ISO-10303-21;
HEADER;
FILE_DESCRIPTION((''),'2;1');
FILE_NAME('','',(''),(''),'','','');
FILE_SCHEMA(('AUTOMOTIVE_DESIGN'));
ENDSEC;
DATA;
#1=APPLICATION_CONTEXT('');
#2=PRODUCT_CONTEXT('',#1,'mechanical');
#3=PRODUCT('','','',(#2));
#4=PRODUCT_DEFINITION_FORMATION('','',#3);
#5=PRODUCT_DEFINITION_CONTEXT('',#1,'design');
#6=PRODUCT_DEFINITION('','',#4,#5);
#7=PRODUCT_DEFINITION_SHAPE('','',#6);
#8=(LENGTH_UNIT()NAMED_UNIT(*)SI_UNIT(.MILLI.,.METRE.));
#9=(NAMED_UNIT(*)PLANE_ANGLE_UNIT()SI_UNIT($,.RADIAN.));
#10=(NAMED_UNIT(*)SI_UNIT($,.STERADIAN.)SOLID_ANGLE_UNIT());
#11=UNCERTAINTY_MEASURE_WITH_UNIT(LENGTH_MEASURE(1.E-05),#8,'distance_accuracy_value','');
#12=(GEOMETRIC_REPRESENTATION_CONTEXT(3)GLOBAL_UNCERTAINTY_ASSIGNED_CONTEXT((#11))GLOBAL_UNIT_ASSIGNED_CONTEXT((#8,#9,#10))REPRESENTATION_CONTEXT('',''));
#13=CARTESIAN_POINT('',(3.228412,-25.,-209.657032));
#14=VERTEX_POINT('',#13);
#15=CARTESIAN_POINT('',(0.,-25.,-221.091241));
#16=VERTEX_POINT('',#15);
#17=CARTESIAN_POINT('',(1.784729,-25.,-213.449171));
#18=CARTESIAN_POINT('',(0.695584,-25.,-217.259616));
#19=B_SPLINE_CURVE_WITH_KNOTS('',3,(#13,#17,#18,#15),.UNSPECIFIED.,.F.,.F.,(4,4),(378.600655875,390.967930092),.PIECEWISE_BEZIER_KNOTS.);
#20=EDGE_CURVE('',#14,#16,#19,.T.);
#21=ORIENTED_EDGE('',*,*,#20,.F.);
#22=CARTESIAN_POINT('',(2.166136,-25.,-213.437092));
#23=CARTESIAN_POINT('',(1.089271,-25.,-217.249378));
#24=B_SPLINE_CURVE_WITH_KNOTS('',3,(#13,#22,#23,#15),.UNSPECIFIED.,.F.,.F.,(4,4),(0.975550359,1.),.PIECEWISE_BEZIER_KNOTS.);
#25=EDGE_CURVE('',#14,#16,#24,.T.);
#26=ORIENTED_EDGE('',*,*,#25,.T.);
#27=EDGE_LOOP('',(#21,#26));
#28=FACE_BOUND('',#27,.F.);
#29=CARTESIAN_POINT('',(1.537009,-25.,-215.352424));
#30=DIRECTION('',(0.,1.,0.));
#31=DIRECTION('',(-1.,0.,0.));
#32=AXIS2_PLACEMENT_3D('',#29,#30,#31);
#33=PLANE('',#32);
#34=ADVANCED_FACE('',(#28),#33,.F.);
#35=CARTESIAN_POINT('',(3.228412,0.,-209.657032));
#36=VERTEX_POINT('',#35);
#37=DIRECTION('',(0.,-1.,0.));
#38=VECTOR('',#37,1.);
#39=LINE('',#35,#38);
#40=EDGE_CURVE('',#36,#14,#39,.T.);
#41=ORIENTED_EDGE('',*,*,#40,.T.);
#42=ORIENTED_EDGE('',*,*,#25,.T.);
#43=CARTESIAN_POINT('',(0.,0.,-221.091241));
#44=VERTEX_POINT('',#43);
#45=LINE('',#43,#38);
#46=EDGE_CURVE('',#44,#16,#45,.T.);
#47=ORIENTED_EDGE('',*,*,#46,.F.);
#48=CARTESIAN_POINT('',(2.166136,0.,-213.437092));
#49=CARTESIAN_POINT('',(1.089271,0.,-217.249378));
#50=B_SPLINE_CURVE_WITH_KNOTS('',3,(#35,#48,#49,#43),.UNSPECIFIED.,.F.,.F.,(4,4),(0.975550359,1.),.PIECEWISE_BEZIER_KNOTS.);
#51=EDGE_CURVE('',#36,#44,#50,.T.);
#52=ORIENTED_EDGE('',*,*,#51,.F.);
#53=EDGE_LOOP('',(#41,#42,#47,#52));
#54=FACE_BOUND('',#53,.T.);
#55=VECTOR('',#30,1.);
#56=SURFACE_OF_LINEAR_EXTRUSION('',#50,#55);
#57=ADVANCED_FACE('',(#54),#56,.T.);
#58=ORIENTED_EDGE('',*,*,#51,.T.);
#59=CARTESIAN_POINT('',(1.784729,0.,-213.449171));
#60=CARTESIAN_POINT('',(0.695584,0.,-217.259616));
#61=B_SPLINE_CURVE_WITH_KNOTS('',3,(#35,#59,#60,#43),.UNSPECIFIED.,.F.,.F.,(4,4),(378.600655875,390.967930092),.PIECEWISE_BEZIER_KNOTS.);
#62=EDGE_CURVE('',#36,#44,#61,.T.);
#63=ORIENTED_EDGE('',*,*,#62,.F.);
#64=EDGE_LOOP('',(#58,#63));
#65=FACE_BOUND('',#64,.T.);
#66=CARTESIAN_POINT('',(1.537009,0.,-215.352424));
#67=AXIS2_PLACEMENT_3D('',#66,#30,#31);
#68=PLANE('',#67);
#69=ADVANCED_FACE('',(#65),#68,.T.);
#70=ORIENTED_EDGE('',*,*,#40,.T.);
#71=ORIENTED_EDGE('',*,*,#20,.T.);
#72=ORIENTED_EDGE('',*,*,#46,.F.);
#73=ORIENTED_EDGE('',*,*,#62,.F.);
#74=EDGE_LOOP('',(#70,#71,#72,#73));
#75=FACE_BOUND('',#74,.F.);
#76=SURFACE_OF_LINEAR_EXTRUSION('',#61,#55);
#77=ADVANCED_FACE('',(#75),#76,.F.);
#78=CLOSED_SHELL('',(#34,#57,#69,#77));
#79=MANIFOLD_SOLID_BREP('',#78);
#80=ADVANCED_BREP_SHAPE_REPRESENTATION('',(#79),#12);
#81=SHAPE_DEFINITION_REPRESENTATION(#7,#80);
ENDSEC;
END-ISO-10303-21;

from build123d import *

# Parameters (mm, degrees)
F4_DEPTH = 25


with BuildPart() as f4:
    # F3 (on Front) → F4 (new body)
    with BuildSketch(Plane.XZ):
        with BuildLine():
            add(Edge.make_bspline(
                [(3.2284122208, -209.6570315379), (2.1661361953, -213.437092478), (1.0892706333, -217.2493781635), (0, -221.0912411008)],
                knots=[0.9755503587, 0.9755503587, 0.9755503587, 0.9755503587, 1, 1, 1, 1], degree=3))
            add(Edge.make_bspline(
                [(3.2284122208, -209.6570315379), (1.7847289061, -213.4491712031), (0.695584279, -217.2596157222), (0, -221.0912411008)],
                knots=[378.6006558751, 378.6006558751, 378.6006558751, 378.6006558751, 390.9679300919, 390.9679300919, 390.9679300919, 390.9679300919], degree=3))
        make_face()
    extrude(amount=F4_DEPTH)


solid = f4.part
